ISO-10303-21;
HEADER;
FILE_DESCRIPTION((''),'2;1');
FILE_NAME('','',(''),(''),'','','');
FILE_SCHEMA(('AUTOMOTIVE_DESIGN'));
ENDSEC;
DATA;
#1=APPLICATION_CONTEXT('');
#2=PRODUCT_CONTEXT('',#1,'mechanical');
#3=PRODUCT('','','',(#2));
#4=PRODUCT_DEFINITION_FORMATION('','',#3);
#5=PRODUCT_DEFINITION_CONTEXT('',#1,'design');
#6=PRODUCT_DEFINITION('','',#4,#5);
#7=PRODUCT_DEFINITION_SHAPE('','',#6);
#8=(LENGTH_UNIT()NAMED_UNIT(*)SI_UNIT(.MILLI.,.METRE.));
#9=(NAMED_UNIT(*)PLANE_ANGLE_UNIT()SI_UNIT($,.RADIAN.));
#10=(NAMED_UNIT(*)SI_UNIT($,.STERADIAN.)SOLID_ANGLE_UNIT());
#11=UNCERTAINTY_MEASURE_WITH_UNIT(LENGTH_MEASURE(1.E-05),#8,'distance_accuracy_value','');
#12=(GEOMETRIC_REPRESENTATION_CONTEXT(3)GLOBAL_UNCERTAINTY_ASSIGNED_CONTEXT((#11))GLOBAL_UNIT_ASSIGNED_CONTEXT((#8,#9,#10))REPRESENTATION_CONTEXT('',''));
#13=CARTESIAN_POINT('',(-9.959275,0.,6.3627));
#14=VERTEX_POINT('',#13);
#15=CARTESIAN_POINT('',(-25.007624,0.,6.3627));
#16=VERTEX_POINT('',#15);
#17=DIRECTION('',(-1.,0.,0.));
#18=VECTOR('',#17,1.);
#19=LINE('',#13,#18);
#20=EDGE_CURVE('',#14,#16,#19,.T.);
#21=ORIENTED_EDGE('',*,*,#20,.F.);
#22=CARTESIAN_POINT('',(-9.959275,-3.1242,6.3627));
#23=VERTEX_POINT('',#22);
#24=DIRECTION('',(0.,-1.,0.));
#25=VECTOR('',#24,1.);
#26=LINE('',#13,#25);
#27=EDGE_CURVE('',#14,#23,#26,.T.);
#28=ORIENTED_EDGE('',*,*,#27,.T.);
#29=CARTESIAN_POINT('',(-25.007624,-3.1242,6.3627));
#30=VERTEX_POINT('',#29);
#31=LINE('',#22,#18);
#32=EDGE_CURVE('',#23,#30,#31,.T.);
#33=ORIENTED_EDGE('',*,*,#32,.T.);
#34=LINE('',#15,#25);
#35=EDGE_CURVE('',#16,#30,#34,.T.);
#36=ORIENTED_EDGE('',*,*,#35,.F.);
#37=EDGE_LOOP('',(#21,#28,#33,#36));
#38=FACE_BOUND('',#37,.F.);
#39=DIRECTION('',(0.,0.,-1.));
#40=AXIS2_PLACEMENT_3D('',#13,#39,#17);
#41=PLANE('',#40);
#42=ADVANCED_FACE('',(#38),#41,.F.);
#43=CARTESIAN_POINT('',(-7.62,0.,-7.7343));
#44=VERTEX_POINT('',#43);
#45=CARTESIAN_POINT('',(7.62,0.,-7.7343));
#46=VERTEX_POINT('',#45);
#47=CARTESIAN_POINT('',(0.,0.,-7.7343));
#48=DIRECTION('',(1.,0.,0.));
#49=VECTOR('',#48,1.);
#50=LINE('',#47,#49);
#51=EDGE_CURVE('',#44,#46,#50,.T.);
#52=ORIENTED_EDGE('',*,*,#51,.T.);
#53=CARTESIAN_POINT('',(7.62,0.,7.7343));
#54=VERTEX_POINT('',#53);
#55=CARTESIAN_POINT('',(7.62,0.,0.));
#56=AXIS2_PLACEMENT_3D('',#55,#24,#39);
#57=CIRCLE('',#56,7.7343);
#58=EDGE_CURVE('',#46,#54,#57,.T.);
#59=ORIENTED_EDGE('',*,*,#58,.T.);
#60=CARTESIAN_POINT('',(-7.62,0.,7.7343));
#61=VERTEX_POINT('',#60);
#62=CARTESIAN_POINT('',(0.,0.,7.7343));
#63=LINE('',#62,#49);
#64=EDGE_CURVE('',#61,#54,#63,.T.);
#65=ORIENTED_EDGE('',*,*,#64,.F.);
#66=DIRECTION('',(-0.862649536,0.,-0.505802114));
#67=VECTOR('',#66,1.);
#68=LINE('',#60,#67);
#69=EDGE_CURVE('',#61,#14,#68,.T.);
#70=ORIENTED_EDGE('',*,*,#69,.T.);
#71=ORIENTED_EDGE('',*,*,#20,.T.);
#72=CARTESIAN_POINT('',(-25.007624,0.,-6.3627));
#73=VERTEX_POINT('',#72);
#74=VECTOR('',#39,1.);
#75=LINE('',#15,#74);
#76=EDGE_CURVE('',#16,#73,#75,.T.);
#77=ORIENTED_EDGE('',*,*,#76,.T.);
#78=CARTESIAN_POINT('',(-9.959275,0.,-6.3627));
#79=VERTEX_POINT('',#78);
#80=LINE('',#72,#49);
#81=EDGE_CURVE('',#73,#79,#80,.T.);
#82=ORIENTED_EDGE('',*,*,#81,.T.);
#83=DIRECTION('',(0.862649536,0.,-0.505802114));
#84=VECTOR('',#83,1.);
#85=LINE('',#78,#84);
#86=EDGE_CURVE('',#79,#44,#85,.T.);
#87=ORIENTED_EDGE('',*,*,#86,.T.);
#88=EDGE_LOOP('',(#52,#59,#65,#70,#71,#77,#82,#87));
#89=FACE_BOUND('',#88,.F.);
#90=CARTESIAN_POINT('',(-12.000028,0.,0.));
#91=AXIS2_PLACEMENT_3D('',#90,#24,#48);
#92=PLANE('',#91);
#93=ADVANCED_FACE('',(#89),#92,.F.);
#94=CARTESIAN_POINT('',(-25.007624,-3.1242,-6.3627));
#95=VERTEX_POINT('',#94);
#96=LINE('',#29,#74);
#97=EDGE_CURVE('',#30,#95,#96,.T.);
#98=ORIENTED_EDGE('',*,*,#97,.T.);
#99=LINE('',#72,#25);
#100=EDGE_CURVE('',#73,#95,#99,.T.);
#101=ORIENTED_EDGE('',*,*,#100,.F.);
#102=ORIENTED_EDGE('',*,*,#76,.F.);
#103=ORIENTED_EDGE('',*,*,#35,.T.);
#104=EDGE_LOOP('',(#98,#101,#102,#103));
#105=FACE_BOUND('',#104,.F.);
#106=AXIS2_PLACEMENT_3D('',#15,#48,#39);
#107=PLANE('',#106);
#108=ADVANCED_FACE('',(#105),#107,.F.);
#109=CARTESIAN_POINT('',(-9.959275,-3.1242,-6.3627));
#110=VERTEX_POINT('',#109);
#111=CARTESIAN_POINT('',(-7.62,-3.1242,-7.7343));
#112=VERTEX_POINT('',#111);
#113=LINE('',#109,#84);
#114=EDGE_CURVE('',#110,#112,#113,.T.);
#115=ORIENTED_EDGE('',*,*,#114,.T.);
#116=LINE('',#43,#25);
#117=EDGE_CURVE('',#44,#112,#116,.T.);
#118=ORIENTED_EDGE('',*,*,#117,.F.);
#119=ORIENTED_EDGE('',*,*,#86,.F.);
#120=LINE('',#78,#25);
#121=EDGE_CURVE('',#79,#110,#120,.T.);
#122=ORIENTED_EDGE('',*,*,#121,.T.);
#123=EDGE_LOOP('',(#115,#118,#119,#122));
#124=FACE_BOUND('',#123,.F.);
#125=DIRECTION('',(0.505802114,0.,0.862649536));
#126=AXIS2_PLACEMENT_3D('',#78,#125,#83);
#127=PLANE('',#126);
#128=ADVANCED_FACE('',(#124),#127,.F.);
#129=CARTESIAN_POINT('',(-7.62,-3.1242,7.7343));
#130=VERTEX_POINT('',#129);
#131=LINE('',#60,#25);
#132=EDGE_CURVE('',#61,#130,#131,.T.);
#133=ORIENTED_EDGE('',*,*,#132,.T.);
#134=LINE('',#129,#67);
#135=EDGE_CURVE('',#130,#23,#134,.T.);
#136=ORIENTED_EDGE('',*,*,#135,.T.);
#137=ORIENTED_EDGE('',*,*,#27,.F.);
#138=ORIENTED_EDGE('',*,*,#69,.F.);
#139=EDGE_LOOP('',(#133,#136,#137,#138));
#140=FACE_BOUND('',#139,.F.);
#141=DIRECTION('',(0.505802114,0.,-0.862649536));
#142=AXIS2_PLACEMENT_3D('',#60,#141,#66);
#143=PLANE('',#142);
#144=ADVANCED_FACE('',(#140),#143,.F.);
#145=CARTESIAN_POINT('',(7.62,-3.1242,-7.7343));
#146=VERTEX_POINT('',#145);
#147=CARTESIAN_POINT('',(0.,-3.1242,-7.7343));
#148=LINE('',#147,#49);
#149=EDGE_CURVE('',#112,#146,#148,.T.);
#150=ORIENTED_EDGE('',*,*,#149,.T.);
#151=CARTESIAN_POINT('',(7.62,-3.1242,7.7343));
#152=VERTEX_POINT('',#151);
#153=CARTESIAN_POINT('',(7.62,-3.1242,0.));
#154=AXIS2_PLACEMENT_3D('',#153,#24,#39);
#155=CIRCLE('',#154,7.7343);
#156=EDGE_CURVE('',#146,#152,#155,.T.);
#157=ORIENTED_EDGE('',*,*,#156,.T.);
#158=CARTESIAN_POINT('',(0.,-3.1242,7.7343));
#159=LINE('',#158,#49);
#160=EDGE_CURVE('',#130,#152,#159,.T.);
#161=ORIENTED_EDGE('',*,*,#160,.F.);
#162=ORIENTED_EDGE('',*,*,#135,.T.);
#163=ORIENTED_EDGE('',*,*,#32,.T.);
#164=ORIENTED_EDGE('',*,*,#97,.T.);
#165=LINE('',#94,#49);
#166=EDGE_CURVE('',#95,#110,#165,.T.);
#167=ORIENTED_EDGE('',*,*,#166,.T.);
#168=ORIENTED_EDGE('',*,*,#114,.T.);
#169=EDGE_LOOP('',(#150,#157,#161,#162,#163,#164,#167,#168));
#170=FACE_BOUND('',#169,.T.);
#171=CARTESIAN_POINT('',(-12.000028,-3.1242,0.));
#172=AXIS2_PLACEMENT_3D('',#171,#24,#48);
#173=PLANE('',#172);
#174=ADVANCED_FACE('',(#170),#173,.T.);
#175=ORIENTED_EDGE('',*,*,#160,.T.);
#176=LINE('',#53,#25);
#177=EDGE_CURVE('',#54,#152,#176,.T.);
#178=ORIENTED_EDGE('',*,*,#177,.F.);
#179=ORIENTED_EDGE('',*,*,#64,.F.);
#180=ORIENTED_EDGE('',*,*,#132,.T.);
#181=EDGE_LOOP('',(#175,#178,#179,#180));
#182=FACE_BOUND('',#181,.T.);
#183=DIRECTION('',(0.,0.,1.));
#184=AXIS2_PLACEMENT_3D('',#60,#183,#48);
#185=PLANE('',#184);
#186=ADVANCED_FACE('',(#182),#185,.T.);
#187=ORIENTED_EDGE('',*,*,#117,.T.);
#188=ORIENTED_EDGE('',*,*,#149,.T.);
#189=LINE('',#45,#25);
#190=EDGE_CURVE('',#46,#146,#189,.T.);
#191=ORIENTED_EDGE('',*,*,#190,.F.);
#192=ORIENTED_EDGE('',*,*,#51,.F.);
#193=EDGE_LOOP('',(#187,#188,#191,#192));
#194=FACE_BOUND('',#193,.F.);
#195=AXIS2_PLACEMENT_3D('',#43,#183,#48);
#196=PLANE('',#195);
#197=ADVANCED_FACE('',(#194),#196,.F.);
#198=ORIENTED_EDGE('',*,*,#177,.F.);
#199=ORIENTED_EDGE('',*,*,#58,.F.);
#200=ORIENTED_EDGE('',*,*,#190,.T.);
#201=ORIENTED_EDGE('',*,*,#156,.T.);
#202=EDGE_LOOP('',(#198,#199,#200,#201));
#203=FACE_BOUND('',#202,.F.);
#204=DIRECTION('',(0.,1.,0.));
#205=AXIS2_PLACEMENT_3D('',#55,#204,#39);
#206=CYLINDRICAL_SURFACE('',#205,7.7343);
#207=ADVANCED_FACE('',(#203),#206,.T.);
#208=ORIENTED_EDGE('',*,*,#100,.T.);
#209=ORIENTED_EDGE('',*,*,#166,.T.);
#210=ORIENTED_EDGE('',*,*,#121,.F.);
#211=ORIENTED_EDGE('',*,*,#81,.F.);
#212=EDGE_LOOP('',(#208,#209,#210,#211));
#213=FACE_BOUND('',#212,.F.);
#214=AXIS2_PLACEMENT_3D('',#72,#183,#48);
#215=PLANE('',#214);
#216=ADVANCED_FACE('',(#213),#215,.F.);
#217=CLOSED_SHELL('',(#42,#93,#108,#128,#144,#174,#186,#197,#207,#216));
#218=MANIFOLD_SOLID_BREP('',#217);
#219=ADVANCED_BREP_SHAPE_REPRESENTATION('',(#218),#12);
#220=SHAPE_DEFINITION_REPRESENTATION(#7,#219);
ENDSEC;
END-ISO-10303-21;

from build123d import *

# Parameters (mm, degrees)
F0_W     = 15.24
F0_H     = 15.4686
F1_DEPTH = 3.1242


# Not quite as in the source:
# - the program builds the solid bodies; features that only make, move or delete a surface that nothing else refers to are left out


with BuildPart() as f1:
    # F0 (on Front) → F1 (new body)
    with BuildSketch(Plane.XZ):
        Polygon((-7.62, -7.7343), (-7.62, 7.7343), (-9.9592747303, 6.3627), (-20.8109102848, 0), (-9.9592747303, -6.3627), align=None)
        Rectangle(F0_W, F0_H)
        with BuildLine():
            ThreePointArc((7.62, -7.7343), (15.3543, 0), (7.62, 7.7343))
            Line((7.62, 7.7343), (7.62, -7.7343))
        make_face()
        Polygon((-20.8109102848, 0), (-9.9592747303, 6.3627), (-22.6592747303, 6.3627), (-25.0076241791, 6.3627), (-25.0076241791, -6.3627), (-22.6592747303, -6.3627), (-9.9592747303, -6.3627), align=None)
    extrude(amount=F1_DEPTH)


solid = f1.part
